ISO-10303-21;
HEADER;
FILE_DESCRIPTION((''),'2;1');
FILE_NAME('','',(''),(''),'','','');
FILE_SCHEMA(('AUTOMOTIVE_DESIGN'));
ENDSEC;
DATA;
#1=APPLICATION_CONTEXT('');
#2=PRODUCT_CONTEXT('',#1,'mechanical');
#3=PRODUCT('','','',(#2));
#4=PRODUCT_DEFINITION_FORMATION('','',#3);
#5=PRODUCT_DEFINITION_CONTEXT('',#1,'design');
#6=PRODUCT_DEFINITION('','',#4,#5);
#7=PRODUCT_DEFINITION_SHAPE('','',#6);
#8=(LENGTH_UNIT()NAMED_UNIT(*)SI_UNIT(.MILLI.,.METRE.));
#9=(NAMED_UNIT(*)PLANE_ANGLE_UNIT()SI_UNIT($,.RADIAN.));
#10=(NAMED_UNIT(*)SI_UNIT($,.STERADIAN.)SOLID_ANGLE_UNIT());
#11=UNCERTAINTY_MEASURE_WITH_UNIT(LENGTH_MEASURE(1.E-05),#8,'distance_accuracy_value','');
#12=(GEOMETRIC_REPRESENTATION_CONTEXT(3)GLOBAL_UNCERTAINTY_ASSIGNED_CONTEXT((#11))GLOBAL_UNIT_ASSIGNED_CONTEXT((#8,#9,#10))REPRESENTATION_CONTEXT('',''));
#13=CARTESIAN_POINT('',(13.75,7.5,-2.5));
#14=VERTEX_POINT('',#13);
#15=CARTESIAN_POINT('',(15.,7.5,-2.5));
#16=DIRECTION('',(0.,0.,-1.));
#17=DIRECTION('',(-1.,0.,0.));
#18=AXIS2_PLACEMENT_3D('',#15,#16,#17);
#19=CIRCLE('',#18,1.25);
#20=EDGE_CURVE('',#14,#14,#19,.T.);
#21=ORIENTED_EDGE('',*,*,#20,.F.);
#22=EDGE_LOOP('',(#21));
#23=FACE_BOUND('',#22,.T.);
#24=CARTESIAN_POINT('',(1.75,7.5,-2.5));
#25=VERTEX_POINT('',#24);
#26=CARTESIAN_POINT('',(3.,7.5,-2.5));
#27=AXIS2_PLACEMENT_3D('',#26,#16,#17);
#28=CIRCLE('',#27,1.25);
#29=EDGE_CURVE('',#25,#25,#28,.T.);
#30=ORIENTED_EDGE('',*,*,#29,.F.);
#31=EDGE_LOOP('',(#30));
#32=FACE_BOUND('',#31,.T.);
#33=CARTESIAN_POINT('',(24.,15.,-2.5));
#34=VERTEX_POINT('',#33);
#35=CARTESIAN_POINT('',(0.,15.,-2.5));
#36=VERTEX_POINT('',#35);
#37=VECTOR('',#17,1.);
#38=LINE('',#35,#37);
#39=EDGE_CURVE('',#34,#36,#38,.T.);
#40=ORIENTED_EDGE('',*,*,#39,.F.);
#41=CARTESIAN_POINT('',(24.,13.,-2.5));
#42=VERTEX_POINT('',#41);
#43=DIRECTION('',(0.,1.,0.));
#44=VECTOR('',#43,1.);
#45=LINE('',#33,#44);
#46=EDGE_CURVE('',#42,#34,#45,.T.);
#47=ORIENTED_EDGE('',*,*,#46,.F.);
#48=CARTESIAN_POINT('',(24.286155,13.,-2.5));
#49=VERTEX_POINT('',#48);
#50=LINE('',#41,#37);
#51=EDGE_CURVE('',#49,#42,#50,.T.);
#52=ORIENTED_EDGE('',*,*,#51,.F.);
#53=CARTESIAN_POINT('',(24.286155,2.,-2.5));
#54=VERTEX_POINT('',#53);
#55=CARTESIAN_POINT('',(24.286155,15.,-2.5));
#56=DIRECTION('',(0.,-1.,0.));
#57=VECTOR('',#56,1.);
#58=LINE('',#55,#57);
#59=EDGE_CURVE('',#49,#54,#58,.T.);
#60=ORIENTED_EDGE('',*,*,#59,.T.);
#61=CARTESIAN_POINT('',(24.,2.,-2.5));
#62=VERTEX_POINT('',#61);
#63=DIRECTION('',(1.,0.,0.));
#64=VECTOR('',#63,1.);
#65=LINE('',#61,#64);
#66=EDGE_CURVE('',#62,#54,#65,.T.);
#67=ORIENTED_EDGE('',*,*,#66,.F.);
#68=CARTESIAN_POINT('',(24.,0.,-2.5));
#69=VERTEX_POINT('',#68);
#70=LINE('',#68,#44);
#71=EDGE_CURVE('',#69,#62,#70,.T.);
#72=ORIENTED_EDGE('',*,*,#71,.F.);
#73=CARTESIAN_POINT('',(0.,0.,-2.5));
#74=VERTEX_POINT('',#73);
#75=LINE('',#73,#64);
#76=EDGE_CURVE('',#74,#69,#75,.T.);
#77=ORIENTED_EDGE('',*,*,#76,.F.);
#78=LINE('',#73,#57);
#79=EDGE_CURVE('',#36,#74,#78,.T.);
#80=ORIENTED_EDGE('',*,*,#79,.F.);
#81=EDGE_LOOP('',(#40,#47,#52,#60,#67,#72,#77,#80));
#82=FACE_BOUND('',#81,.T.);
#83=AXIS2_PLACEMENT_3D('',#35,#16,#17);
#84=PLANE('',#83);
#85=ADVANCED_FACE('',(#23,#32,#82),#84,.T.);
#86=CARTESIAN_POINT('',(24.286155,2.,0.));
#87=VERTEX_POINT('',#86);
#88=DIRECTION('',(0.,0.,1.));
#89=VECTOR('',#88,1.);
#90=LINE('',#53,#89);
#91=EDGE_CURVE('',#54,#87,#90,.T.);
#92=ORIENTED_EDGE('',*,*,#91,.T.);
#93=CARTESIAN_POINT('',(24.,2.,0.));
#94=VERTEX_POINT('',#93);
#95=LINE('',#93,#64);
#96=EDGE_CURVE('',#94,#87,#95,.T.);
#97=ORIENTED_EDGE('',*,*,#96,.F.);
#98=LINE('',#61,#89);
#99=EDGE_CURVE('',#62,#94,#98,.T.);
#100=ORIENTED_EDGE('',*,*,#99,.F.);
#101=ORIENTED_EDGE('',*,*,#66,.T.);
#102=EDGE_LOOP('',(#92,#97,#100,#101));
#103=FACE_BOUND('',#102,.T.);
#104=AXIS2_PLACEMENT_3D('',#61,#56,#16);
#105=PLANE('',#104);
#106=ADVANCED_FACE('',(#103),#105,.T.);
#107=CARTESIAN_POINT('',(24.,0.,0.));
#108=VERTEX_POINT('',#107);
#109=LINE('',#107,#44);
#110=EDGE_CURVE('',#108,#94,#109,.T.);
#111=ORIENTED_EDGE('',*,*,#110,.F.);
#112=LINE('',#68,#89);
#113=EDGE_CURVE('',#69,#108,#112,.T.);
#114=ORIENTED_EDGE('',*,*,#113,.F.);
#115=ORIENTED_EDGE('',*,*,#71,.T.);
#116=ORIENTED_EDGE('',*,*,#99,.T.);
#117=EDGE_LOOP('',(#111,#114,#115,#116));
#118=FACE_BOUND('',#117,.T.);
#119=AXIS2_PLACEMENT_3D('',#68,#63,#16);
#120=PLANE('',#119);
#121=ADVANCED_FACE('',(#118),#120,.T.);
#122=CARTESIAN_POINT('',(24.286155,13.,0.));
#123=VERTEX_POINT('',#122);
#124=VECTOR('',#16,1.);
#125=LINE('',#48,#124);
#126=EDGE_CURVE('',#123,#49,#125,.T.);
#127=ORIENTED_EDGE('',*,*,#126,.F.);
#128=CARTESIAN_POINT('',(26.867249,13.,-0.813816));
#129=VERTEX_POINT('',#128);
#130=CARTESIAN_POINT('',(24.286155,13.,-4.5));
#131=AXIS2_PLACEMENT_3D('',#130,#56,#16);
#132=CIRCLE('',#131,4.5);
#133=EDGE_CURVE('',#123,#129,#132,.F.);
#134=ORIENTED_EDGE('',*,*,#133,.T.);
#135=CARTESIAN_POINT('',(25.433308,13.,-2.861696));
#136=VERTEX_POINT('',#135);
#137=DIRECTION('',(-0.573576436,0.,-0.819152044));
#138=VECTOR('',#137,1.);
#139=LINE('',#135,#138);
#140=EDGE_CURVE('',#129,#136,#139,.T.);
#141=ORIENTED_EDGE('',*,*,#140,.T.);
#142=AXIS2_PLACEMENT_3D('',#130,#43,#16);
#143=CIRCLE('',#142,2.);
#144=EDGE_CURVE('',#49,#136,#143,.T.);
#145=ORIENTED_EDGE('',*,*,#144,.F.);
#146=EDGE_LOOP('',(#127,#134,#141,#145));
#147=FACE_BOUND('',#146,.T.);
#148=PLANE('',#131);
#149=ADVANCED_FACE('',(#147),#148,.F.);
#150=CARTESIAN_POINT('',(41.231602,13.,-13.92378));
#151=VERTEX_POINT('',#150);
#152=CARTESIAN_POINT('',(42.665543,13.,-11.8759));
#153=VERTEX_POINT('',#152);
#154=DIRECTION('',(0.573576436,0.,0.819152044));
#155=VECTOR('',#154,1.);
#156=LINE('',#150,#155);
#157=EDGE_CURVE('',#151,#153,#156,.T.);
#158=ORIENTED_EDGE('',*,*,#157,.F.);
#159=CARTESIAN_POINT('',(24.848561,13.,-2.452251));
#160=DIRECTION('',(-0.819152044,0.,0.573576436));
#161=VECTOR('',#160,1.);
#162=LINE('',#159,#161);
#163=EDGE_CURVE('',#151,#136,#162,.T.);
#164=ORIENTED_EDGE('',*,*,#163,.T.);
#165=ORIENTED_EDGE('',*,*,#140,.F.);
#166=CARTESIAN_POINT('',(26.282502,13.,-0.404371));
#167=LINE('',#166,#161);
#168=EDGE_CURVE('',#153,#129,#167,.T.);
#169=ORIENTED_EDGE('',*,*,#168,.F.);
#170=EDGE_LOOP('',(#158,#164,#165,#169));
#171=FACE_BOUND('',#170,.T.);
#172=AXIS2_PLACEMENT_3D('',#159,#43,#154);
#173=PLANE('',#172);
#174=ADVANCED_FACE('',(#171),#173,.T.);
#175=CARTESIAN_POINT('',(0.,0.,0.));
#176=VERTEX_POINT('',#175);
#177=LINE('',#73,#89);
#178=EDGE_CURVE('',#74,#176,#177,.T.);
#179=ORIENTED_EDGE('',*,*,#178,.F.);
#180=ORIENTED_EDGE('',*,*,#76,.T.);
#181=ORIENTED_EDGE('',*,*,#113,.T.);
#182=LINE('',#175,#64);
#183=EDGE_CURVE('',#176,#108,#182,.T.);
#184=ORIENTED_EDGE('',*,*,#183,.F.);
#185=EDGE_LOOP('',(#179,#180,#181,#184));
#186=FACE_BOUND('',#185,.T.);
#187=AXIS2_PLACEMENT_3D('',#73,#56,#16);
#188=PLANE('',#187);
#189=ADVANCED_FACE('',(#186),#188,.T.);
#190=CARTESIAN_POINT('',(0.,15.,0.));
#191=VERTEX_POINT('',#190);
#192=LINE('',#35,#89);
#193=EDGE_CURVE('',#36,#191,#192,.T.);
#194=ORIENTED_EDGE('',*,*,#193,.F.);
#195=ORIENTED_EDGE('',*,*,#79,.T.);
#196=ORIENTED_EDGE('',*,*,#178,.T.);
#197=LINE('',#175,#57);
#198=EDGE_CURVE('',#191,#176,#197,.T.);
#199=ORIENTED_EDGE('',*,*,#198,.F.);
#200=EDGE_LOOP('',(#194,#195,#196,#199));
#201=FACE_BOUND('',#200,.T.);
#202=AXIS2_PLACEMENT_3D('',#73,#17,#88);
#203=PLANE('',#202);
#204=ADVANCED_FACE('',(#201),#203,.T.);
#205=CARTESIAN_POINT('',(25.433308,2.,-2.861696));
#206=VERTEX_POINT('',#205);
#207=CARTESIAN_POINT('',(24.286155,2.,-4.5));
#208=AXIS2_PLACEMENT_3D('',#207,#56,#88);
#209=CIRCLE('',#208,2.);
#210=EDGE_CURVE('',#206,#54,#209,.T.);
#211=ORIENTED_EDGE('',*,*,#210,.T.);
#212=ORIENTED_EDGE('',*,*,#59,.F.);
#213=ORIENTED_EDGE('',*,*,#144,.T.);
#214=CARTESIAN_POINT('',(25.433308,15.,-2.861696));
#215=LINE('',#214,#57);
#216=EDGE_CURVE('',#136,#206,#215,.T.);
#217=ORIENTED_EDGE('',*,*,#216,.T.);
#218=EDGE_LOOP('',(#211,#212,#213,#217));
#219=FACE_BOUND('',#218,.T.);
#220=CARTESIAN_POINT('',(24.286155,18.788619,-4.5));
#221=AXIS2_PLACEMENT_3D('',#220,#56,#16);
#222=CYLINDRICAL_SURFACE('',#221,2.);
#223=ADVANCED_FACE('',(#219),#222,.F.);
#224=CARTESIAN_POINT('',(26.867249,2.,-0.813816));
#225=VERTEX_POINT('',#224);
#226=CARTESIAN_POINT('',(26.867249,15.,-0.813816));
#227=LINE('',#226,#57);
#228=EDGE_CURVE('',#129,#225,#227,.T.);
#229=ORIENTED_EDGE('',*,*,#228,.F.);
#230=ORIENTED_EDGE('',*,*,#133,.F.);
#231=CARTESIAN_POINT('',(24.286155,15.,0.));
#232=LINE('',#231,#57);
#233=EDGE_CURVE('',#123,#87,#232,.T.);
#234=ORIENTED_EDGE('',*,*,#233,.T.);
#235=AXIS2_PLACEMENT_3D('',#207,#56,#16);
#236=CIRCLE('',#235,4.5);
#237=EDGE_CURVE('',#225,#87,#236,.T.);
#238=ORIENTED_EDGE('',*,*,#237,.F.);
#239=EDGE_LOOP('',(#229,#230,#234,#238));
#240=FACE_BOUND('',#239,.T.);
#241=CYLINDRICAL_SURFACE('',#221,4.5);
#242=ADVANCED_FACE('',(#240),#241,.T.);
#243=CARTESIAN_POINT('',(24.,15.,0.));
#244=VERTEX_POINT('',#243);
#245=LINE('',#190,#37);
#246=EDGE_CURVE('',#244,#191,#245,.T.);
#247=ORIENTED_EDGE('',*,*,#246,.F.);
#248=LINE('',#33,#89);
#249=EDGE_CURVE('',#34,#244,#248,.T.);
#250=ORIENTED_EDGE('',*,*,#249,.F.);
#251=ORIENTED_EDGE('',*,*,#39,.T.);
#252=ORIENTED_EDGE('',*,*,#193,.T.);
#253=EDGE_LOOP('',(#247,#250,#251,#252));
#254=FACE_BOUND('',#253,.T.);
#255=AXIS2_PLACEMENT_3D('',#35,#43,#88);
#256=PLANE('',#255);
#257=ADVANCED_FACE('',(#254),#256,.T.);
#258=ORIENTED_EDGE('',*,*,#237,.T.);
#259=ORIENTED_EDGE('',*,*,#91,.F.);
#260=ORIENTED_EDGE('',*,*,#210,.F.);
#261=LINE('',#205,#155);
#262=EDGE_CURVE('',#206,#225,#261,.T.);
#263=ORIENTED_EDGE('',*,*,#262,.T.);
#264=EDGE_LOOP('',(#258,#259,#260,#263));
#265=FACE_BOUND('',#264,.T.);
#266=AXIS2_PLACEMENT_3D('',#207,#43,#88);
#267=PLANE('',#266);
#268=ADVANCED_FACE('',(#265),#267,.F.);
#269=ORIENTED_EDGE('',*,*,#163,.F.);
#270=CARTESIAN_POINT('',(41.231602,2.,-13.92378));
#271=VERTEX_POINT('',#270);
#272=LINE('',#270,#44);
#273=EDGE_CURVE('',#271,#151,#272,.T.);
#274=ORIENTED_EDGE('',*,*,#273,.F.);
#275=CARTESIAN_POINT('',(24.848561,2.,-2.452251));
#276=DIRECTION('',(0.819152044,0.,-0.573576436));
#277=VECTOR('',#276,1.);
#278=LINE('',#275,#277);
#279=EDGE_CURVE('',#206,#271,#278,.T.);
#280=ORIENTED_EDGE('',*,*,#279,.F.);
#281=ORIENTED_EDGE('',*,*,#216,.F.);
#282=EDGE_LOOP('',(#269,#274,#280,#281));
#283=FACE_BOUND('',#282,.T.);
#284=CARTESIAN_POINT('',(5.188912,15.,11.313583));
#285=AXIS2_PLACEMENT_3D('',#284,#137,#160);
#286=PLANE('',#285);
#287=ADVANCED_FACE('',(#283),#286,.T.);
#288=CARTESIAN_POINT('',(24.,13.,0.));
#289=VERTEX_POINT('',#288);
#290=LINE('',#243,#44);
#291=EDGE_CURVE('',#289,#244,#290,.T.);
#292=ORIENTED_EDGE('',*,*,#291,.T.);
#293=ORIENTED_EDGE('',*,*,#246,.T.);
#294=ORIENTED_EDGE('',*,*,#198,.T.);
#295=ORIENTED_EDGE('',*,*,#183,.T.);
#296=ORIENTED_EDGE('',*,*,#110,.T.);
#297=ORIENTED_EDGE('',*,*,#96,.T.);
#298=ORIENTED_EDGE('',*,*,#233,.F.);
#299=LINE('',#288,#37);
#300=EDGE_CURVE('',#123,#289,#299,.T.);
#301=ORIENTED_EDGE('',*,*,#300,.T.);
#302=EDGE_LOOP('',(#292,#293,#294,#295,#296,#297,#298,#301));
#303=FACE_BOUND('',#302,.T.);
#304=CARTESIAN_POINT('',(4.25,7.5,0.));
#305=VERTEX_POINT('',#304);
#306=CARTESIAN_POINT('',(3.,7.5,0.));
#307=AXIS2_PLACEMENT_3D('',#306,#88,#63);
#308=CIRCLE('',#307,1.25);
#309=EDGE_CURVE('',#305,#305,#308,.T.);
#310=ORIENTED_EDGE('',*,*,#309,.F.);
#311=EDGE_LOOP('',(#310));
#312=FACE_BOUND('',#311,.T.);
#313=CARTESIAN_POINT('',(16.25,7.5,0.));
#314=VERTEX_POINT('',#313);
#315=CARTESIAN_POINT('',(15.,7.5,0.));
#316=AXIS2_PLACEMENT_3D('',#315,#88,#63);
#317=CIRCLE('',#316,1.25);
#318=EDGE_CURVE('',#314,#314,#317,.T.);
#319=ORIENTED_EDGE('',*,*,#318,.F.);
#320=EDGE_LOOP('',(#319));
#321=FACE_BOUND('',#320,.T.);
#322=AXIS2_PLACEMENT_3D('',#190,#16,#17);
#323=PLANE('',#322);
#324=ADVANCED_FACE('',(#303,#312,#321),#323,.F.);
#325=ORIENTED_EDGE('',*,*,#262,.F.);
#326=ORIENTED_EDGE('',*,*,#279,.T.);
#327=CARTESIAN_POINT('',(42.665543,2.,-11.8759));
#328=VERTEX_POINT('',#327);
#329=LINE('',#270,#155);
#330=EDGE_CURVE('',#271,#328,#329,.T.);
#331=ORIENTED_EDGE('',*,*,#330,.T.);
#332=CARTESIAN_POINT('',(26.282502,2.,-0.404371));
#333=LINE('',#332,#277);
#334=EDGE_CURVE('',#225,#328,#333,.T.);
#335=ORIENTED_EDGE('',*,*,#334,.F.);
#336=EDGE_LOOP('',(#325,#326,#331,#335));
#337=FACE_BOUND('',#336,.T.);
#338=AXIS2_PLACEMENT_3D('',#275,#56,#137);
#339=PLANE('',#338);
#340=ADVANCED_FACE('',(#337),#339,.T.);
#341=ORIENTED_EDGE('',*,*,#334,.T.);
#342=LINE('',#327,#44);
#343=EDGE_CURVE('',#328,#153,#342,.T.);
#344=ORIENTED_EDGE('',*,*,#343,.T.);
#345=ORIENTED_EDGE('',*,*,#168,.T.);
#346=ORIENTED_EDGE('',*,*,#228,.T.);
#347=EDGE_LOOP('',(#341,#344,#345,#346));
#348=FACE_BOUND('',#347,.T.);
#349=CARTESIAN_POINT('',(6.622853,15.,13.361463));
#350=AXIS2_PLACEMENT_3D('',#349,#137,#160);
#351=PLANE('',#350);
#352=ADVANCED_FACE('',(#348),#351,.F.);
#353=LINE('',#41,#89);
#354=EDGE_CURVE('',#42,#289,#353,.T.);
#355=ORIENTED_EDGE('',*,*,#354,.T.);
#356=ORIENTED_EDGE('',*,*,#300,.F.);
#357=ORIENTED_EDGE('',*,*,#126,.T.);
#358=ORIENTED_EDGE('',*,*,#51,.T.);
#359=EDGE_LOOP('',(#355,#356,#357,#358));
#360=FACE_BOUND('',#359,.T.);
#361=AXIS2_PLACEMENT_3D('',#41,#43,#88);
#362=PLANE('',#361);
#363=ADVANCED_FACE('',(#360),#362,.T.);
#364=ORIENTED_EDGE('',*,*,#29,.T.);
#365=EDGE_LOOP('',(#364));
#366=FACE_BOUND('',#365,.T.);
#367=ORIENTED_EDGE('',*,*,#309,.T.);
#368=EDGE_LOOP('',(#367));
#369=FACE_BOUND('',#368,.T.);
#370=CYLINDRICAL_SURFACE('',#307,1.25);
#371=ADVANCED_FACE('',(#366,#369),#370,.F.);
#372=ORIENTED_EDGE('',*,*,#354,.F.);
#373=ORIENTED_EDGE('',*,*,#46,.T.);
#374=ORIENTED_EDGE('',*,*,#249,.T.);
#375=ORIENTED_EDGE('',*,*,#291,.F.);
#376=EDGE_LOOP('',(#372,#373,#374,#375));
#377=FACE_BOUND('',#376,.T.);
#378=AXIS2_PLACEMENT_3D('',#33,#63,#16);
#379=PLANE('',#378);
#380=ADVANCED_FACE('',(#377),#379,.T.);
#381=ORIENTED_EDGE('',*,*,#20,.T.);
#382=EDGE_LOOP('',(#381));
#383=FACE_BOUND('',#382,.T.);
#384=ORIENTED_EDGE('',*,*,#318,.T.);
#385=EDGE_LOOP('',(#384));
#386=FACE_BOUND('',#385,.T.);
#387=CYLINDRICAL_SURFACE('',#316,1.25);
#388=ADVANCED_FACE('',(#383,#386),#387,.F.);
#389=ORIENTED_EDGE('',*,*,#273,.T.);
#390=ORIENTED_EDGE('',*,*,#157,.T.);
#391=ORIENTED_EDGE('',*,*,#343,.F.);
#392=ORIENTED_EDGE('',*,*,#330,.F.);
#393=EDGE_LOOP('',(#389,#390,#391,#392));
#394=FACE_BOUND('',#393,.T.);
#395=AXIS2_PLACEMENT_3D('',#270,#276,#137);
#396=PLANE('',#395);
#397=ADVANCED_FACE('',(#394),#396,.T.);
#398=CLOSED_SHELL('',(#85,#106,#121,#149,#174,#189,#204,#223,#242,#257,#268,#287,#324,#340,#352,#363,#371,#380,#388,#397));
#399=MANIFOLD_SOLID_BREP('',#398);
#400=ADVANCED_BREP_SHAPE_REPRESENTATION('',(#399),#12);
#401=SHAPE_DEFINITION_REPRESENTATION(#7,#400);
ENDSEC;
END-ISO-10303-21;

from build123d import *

# Parameters (mm, degrees)
SM_BASE_FLANGE_1_DEPTH = 2.5
HOLE_WIZARD_M31_D      = 2.5
HOLE_WIZARD_M31_DEPTH  = 8.5
HOLE_WIZARD_M31_TIP    = 0.751075774
OTHER_START            = 2
OTHER_1_DEPTH          = 11
OTHER_1_2_DEPTH        = 11


# Read off the part's stored shape, not the designer's step: Нарисованный сгиб1
# Sheet-metal steps are written as plain solids
with BuildPart() as part:
    # Sketch 1 → Базовая кромка1 (new body)
    with BuildSketch(Plane.XY):
        Polygon((24, 15), (24, 13), (44, 13), (44, 2), (24, 2), (24, 0), (0, 0), (0, 15), align=None)
    extrude(amount=-SM_BASE_FLANGE_1_DEPTH)

    # Отверстие обработанное метчиком M31
    with Locations(Plane.XY):
        with Locations((3, 7.5), (15, 7.5)):
            Hole(HOLE_WIZARD_M31_D / 2, depth=HOLE_WIZARD_M31_DEPTH)
            with Locations((0, 0, -(HOLE_WIZARD_M31_DEPTH + HOLE_WIZARD_M31_TIP / 2))):  # 118° drill point
                Cone(0, HOLE_WIZARD_M31_D / 2, HOLE_WIZARD_M31_TIP, mode=Mode.SUBTRACT)

    # Other 1 outline → Other 1 (cut)
    with BuildSketch(Plane(origin=(0, 0, 0), x_dir=(1, 0, 0), z_dir=(0, 1, 0)).offset(OTHER_START)):
        with BuildLine():
            Line((44, 2.5), (29.275370017, 2.5))
            Line((29.275370017, 2.5), (26.867249414, 0.813815801))
            ThreePointArc((26.867249414, 0.813815801), (25.639331548, 0.208273722), (24.28615545, 0))
            Line((24.28615545, 0), (44, 0))
            Line((44, 0), (44, 2.5))
        make_face()
    extrude(amount=OTHER_1_DEPTH, mode=Mode.SUBTRACT)

    # Other 1 2 outline → Other 1 2 (add)
    with BuildSketch(Plane(origin=(0, 0, 0), x_dir=(1, 0, 0), z_dir=(0, 1, 0)).offset(OTHER_START)):
        with BuildLine():
            Line((29.275370017, 2.5), (42.665543077, 11.875900115))
            Line((42.665543077, 11.875900115), (41.231601986, 13.923780225))
            Line((41.231601986, 13.923780225), (25.433308323, 2.861695911))
            ThreePointArc((25.433308323, 2.861695911), (24.887567049, 2.592566099), (24.28615545, 2.5))
            Line((24.28615545, 2.5), (29.275370017, 2.5))
        make_face()
    extrude(amount=OTHER_1_2_DEPTH)


solid = part.part
